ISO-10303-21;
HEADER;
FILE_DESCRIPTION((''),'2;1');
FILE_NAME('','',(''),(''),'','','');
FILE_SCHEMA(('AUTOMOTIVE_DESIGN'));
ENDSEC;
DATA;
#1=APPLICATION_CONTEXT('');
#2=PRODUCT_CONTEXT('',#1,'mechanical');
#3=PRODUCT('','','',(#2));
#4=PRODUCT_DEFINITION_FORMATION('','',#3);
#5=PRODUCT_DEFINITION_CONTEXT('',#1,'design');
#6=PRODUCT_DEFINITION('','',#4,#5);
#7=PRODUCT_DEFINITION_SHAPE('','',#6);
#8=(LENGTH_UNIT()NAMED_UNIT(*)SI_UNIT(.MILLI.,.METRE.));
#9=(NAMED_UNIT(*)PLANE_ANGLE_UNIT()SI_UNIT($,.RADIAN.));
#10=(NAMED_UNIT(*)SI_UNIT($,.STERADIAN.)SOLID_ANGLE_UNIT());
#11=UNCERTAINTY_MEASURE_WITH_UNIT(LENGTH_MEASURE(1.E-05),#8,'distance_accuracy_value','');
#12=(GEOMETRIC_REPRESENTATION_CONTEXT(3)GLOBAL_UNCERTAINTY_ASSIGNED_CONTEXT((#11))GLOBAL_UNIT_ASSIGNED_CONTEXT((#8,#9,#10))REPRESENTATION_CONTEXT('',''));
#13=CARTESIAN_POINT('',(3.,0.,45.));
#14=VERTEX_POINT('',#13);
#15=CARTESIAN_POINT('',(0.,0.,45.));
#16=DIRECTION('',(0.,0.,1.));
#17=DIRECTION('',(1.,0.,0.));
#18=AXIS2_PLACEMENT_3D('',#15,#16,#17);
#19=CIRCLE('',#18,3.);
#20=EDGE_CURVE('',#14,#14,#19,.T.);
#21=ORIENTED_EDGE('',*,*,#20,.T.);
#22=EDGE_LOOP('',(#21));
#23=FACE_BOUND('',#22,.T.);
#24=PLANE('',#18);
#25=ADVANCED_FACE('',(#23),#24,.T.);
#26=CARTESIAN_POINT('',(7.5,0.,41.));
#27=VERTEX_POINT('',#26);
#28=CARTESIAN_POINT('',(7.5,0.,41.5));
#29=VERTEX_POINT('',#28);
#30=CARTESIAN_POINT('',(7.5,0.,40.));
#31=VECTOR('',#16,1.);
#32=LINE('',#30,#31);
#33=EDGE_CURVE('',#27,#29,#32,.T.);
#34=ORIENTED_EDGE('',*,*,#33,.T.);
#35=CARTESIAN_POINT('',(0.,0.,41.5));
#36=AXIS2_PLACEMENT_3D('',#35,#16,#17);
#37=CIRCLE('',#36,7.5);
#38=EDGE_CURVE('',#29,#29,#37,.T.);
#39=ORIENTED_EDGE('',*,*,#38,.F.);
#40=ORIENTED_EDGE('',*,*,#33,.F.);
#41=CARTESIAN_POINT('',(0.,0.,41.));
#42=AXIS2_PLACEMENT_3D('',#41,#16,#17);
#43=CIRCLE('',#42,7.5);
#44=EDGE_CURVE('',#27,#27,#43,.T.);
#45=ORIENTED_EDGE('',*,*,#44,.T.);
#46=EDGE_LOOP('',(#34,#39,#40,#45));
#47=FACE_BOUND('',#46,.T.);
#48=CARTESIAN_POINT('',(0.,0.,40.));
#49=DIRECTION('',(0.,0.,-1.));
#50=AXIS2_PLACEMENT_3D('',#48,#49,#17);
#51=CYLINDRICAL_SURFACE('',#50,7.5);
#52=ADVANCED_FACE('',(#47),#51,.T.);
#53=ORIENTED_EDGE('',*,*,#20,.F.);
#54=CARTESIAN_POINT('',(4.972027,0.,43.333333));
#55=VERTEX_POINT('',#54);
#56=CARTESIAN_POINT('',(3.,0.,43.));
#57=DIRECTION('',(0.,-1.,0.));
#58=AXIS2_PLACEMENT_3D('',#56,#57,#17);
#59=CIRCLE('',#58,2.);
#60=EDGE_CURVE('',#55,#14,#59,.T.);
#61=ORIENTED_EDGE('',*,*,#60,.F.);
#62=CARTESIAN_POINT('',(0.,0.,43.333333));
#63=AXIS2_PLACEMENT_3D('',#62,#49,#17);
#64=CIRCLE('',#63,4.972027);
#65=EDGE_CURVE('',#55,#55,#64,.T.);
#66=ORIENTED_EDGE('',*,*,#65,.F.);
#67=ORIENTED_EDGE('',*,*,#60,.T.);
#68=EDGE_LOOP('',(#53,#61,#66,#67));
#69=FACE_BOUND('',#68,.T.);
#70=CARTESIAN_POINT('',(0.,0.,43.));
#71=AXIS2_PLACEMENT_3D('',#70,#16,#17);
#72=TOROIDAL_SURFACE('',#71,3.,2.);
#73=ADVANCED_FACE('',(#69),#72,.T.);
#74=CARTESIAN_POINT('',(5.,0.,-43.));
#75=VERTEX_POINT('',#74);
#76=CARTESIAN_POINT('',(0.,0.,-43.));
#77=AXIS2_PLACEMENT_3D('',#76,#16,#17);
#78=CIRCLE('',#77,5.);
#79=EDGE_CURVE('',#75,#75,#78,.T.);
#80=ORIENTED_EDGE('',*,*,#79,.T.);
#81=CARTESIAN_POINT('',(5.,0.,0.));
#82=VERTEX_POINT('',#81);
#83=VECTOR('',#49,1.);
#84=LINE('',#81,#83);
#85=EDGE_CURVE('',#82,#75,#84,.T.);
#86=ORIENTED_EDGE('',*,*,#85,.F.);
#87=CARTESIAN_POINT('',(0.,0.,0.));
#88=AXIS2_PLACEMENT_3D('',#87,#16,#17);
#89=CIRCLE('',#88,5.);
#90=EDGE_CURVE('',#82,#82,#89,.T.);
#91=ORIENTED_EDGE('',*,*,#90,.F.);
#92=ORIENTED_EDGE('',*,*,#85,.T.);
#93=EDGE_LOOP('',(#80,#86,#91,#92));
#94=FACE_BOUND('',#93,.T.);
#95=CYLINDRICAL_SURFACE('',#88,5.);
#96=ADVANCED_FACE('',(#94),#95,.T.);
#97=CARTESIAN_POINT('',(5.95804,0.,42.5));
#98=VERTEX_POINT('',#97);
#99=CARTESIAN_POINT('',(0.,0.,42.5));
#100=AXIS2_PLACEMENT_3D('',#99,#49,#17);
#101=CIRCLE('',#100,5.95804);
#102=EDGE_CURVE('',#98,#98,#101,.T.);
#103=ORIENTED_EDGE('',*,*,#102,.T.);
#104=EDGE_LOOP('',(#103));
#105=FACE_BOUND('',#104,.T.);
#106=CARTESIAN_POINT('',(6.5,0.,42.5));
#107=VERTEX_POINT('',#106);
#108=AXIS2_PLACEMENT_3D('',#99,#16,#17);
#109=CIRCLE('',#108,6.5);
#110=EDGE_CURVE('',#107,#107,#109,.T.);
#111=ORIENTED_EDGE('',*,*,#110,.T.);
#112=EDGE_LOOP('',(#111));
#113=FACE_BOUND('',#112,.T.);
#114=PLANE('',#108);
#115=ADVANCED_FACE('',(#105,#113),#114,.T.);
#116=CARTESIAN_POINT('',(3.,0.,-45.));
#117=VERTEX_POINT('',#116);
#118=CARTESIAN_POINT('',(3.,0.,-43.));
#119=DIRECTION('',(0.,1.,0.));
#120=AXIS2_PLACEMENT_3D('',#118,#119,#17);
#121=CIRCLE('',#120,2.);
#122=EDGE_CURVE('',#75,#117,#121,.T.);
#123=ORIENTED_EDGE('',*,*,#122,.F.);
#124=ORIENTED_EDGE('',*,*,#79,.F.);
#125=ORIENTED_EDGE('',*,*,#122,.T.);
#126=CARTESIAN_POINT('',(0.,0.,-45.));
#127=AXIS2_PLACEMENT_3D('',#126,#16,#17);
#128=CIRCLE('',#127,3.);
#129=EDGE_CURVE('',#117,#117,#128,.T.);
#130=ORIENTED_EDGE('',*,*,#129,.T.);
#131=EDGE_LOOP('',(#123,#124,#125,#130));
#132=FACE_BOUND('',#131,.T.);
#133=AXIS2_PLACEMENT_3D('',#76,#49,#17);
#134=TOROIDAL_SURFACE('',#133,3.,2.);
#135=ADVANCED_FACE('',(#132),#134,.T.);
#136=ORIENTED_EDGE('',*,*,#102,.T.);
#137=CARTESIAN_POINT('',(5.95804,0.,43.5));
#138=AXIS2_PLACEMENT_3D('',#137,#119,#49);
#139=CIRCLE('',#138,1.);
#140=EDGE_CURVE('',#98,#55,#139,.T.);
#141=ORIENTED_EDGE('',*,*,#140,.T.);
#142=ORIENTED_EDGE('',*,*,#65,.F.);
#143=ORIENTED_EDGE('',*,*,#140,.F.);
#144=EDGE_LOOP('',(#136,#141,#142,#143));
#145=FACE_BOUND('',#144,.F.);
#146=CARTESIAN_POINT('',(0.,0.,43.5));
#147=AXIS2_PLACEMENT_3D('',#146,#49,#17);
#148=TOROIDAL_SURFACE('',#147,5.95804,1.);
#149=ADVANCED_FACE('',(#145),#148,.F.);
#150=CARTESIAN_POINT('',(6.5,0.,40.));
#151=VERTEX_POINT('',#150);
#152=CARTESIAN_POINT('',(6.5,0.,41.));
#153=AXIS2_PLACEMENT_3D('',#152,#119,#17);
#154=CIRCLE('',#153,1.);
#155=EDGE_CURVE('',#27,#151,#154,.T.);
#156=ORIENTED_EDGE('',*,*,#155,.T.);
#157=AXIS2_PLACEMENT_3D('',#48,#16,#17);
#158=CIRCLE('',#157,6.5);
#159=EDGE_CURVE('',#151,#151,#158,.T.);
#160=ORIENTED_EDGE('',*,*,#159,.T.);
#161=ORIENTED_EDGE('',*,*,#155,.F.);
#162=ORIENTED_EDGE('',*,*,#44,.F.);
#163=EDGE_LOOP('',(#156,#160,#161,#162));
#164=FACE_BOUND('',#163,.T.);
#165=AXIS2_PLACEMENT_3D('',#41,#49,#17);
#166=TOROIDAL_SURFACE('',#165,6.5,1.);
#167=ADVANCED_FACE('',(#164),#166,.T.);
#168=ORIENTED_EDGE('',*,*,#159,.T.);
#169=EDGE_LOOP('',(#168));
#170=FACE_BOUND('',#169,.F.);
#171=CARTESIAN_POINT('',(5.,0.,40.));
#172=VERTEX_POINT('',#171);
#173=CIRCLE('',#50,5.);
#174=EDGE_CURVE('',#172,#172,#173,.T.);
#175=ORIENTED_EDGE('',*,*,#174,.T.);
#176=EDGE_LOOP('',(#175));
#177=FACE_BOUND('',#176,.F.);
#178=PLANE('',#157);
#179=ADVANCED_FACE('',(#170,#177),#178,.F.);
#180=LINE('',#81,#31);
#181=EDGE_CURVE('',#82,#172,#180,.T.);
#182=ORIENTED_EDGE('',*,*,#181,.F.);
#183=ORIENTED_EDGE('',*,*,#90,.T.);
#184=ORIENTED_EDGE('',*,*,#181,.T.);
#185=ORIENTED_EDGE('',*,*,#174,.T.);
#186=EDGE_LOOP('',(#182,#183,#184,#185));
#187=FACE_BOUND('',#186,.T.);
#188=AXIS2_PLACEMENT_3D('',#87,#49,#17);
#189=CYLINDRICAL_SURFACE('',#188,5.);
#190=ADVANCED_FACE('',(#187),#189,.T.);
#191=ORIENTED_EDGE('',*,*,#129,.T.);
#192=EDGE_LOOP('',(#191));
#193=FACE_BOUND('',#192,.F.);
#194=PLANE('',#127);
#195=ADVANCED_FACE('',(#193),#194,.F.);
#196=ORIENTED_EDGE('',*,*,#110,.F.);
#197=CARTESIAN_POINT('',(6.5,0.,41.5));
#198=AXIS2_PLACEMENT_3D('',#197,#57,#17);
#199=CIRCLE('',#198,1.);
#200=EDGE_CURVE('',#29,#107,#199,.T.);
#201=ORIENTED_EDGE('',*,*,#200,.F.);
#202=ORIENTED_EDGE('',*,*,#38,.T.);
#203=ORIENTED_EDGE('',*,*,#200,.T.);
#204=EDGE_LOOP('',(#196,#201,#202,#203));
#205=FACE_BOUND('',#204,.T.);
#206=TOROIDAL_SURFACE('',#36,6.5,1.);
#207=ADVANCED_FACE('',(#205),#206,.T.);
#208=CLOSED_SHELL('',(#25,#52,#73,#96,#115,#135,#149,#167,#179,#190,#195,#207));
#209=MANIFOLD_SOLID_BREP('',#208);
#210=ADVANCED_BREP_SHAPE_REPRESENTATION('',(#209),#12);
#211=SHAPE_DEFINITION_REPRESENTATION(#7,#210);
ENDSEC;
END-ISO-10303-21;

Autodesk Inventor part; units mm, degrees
ref_plane "YZ Plane" through (0, 0, 0) normal (1, 0, 0) x (0, 1, 0)
ref_plane "XZ Plane" through (0, 0, 0) normal (0, 1, 0) x (-1, 0, 0)
sketch "Sketch1" plane through (0, 0, 0) normal (0, 0, 1) x (1, 0, 0)
  circle A0 centre (0, 0) radius 5
  dimension "d0" = 10
extrude "Extrusion1" add sketch "Sketch1" along normal mid plane 90
fillet "Fillet1" radius 2 1 edges at (-5, 0, 45)
fillet "Fillet2" radius 2 1 edges at (-5, 0, -45)
ref_plane "Work Plane1" through (0, 0, 40) normal (0, 0, 1) x (1, 0, 0)
sketch "Sketch2" plane through (0, 0, 40) normal (0, 0, 1) x (1, 0, 0)
  circle A0 centre (0, 0) radius 3 projected
  circle A1 centre (0, 0) radius 7.5
  dimension "d6" = 15
extrude "Extrusion2" add sketch "Sketch2" along normal blind 2.5
fillet "Fillet3" radius 1 2 edges at (-7.5, 0, 42.5) (-7.5, 0, 40)
fillet "Fillet4" radius 1 1 edges at (-5, 0, 42.5)
properties part number "panda"
